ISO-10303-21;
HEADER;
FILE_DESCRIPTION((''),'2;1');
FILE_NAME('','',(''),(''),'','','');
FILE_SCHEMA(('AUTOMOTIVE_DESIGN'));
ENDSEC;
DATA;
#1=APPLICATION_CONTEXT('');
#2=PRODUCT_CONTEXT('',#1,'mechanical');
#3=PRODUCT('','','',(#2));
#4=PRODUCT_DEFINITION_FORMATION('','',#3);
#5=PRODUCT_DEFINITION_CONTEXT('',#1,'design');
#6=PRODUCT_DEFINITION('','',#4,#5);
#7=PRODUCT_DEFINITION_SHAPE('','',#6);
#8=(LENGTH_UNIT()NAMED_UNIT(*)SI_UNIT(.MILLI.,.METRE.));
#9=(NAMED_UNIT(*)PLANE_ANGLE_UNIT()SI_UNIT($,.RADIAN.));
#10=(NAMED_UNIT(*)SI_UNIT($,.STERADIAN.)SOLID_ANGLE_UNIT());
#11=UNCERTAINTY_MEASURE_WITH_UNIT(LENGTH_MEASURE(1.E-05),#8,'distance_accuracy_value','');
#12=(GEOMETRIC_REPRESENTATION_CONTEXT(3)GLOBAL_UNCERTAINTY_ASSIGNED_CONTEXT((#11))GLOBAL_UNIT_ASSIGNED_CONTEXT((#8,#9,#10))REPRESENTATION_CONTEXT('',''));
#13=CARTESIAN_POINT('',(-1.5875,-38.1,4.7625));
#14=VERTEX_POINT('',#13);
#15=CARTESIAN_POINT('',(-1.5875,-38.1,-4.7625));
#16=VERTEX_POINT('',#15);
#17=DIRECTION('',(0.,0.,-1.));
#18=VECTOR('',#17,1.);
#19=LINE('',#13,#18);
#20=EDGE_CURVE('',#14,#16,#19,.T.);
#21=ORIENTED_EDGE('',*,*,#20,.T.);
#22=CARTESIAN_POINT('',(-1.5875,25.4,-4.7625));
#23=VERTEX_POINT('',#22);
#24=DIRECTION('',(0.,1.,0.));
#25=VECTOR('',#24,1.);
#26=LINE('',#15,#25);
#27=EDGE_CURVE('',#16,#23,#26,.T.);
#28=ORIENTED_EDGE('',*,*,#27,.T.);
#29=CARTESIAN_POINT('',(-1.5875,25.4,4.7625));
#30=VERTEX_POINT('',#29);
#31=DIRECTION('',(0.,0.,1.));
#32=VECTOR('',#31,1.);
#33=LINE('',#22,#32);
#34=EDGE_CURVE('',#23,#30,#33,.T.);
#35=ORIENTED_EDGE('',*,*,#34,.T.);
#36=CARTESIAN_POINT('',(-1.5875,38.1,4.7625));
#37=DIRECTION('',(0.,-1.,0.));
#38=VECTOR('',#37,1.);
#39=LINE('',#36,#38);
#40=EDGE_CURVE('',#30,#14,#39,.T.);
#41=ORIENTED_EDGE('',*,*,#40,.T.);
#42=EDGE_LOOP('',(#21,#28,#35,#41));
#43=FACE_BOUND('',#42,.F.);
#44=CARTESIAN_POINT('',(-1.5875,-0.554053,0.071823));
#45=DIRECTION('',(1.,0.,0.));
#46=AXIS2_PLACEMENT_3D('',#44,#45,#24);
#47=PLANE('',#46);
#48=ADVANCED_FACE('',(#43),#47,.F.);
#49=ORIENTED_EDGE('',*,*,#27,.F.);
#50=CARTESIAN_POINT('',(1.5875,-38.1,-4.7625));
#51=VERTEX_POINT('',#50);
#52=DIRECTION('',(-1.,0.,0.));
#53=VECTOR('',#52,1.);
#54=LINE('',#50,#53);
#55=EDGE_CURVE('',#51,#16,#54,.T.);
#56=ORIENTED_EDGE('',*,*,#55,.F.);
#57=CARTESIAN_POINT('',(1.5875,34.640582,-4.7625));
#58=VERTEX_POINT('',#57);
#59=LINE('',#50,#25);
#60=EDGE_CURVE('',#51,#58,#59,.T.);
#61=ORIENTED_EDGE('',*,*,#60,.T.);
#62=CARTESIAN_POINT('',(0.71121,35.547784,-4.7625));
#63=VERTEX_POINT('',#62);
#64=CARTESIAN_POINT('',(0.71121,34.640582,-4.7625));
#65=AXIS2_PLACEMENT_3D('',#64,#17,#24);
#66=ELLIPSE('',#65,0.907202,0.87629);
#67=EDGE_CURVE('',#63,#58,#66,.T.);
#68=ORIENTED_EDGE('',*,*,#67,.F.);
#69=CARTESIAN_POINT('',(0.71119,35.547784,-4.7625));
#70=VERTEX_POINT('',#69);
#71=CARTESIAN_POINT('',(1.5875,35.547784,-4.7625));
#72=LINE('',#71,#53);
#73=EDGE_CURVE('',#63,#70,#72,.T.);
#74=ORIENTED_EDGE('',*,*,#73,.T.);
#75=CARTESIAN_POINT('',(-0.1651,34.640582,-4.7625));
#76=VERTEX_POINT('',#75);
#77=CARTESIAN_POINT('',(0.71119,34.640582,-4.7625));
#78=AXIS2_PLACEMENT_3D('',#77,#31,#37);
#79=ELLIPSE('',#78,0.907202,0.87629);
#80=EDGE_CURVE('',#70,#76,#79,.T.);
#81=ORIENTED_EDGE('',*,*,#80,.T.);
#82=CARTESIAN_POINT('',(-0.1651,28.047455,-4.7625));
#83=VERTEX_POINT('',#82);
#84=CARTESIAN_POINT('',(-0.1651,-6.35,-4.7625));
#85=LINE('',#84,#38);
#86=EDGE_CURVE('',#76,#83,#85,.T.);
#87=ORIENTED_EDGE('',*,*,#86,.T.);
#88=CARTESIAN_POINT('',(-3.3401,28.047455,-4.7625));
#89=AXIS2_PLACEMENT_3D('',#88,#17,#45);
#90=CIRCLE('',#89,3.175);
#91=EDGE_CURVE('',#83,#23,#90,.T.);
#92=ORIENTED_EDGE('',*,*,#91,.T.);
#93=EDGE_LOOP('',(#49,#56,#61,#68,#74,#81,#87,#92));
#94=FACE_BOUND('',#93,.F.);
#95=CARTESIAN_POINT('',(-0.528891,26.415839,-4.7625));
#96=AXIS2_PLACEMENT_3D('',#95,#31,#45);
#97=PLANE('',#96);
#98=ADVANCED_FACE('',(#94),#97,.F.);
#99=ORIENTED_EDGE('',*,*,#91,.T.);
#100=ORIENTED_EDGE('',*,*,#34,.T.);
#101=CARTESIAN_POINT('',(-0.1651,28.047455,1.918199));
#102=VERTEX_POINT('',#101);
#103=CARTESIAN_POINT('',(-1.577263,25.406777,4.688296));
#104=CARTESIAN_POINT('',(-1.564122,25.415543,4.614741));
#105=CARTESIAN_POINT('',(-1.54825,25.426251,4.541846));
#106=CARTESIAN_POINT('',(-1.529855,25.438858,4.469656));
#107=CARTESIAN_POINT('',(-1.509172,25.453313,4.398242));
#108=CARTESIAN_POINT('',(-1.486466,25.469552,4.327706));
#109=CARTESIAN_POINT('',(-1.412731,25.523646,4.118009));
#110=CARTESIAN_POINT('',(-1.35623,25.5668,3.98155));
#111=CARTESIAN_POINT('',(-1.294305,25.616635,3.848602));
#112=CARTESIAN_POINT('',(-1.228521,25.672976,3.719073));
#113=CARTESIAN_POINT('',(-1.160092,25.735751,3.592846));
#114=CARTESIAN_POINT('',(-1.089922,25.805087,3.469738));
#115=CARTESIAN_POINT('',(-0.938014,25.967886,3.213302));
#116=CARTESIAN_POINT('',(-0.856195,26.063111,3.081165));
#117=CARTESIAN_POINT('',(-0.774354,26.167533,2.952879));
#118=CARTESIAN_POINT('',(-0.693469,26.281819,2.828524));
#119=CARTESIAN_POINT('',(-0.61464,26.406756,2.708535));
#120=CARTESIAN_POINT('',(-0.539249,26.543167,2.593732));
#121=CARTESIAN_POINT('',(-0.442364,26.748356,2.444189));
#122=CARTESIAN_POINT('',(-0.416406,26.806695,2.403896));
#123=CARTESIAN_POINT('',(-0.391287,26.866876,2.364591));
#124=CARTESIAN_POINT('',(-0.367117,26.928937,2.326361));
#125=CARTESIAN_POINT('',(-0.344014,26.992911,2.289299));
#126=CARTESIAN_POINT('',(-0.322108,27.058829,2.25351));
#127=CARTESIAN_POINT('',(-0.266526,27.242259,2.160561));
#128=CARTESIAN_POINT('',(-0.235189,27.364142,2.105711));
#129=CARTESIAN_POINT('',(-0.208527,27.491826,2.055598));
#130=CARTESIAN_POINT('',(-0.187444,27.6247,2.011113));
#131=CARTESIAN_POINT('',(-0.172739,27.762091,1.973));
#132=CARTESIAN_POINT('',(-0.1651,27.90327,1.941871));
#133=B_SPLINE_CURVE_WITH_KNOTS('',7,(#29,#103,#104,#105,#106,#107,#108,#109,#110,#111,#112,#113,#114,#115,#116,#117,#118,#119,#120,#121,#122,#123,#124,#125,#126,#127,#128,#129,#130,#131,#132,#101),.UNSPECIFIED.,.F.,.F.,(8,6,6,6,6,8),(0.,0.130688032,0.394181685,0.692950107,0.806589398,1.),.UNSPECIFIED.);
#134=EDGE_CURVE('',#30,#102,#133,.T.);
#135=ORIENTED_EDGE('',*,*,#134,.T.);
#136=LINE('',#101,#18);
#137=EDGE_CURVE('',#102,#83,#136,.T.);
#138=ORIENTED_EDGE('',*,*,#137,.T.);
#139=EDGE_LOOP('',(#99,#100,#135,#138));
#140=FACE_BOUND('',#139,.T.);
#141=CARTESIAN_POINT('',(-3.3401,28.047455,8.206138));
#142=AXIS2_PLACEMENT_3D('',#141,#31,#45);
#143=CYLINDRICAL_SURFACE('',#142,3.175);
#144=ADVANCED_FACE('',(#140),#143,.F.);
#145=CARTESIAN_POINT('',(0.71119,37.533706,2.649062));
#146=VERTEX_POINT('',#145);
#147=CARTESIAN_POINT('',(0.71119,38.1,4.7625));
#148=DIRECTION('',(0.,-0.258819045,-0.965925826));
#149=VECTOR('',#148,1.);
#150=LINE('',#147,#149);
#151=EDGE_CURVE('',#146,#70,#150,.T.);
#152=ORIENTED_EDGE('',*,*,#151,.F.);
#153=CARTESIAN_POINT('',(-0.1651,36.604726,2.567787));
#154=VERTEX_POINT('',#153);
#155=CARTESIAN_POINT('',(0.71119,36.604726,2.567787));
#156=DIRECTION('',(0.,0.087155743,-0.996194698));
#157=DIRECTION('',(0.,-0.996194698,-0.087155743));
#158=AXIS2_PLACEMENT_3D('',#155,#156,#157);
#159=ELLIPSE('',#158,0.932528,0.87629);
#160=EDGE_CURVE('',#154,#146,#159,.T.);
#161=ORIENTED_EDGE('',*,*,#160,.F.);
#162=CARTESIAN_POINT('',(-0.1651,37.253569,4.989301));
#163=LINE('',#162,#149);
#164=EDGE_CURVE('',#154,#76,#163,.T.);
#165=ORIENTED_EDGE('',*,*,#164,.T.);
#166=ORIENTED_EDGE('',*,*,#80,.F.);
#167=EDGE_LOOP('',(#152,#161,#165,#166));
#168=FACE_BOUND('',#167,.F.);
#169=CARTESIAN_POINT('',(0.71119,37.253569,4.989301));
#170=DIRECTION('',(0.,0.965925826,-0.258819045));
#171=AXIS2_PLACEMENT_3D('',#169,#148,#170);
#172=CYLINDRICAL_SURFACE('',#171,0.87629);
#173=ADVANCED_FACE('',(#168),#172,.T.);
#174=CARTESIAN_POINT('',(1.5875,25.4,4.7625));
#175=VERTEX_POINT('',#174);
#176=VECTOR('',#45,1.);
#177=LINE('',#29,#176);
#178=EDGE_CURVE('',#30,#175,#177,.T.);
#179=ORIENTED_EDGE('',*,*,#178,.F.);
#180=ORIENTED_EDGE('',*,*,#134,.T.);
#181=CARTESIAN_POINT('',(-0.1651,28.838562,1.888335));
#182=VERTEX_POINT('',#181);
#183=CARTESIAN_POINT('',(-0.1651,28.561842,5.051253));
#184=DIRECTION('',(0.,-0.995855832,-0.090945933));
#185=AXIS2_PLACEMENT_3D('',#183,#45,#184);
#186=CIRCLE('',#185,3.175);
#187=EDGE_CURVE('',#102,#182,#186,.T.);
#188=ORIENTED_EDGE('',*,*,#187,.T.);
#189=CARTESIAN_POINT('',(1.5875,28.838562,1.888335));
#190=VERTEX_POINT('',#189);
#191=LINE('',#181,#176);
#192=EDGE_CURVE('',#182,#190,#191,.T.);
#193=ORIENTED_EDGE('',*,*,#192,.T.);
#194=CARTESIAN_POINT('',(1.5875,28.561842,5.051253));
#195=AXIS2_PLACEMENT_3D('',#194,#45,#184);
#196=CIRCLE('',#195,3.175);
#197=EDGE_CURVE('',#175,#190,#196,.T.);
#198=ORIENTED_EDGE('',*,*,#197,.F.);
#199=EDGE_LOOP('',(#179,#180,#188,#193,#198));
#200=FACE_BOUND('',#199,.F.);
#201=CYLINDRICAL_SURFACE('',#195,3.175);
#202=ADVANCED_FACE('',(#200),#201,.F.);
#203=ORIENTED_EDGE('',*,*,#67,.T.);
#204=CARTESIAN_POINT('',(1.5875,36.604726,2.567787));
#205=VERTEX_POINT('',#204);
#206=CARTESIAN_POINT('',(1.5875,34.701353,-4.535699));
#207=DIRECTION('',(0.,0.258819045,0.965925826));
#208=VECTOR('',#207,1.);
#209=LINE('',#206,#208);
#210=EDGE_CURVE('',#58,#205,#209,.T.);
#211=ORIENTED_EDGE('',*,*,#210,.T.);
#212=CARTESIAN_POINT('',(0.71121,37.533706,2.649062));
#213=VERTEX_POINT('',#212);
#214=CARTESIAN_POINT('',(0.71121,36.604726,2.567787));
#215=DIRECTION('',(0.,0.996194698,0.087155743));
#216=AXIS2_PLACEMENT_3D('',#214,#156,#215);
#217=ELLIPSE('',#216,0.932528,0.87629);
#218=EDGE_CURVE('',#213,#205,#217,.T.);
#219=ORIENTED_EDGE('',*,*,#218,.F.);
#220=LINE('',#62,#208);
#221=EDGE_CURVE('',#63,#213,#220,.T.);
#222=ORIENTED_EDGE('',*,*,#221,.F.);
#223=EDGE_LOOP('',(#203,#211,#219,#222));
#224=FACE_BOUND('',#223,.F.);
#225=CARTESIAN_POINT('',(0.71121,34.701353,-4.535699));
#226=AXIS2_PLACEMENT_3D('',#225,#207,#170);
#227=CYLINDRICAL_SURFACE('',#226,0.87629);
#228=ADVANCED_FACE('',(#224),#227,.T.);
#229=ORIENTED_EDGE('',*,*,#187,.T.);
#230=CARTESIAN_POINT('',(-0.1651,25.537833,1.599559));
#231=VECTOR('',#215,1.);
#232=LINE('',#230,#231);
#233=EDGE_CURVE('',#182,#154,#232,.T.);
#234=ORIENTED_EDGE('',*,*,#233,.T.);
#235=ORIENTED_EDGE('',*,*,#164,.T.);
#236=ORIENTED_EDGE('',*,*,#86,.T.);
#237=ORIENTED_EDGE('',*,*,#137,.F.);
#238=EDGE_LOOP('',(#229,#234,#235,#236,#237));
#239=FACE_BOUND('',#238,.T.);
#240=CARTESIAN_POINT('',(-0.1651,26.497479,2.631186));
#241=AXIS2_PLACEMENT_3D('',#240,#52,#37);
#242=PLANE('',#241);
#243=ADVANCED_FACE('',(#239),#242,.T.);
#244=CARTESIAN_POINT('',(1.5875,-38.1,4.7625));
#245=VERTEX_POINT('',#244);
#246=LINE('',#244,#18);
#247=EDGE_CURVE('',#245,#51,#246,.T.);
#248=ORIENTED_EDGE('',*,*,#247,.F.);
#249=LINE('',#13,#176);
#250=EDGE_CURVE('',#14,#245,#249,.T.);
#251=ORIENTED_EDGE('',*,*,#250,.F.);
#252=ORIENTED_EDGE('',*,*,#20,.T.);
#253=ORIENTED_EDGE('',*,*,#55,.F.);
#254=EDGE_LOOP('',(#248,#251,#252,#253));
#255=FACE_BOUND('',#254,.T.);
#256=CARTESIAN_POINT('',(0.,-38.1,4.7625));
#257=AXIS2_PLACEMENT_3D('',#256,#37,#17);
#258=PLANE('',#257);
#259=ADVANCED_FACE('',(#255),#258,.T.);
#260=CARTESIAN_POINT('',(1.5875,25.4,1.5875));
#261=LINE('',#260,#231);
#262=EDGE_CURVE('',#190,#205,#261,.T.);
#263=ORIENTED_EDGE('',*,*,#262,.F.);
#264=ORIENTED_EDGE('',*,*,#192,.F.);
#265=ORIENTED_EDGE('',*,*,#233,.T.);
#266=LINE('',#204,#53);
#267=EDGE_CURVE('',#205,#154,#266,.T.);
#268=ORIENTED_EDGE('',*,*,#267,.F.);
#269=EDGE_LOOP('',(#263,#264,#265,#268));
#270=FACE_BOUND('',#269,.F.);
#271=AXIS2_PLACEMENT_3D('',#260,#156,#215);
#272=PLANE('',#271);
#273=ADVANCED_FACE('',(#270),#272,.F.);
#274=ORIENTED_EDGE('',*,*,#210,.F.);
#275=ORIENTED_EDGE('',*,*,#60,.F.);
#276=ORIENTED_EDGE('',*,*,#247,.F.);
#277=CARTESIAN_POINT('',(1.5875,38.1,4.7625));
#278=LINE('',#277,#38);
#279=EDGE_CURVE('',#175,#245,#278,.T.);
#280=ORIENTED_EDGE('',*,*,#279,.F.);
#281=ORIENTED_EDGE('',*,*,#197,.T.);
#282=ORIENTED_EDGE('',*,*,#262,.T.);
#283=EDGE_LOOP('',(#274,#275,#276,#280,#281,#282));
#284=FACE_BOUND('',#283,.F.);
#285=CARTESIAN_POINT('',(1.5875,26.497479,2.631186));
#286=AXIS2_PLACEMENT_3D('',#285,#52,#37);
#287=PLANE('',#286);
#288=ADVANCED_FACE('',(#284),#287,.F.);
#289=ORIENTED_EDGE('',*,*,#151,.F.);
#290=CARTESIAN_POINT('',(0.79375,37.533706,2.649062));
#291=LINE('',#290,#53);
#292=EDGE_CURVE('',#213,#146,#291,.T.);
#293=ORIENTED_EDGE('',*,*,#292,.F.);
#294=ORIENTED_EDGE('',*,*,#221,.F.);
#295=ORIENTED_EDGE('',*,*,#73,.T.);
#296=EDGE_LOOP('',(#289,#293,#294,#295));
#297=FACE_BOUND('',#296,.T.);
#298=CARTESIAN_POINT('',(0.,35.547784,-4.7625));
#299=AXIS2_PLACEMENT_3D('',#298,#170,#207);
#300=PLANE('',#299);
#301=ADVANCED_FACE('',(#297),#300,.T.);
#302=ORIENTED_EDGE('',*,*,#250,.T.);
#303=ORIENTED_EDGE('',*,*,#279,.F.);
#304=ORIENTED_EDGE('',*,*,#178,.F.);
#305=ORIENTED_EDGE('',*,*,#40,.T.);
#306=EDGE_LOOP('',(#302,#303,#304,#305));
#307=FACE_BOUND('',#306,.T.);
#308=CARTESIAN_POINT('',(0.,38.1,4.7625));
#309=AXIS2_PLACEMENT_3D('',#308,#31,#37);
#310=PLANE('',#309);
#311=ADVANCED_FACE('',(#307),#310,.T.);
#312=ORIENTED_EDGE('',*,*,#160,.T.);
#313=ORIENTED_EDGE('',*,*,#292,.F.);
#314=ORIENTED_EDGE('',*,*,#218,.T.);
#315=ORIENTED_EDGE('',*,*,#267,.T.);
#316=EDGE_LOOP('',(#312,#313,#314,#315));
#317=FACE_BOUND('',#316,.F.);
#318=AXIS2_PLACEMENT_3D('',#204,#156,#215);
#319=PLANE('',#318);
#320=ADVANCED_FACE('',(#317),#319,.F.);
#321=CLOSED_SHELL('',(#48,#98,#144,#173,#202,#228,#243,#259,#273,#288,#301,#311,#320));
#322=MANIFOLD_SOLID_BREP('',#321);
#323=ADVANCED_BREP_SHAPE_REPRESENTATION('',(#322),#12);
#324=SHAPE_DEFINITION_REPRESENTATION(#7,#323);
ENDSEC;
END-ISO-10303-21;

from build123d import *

# Parameters (mm, degrees)
F4_DEPTH     = 1.5875
F0_W         = 1.4224
F0_H         = 12.7
F5_DEPTH     = 25.4
F1_R         = 0.87629
F2_DEPTH     = 25.4
F7_T1_DEPTH  = 1.7526
F7_T6_DEPTH  = 12.9686376242
F7_T12_DEPTH = 12.9686376242
F7_T17_DEPTH = 10.3818412391


# Not quite as in the source:
# - a fillet or chamfer that OpenCascade refuses, or shapes differently, is made with other operations: its cross-section is extruded or revolved along the edge and cut away or added
# - a fillet or chamfer is up to 0.001 mm smaller than in the source, because OpenCascade refuses the exact size


with BuildPart() as f4:
    # F3 (on Right) → F4 (new body, symmetric)
    with BuildSketch(Plane.YZ):
        Polygon((35.5477839421, -4.7625), (38.1, 4.7625), (-38.1, 4.7625), (-38.1, -4.7625), align=None)
    extrude(amount=F4_DEPTH, both=True)

    # F0 (on face) → F5 (cut)
    with BuildSketch(Plane.XY.offset(4.7625)):
        with Locations((-0.8763, 31.75)):
            Rectangle(F0_W, F0_H)
    extrude(amount=-F5_DEPTH, mode=Mode.SUBTRACT)

    # F1 (radius 0.8763 in the source; OpenCascade refuses exactly that, so slightly less here)
    f1_edges = [f4.edges().sort_by_distance(p)[0] for p in [
        (1.5875, 36.823892, 0),
        (-0.1651, 36.823892, 0),
    ]]
    fillet(f1_edges, radius=F1_R)

    # F6 (on face) → F2 (cut)
    with BuildSketch(Plane.YZ.offset(1.5875)):
        Polygon((37.1927978359, 4.7625), (25.4, 4.7625), (25.4, 1.5875), (36.6047261297, 2.5677865143), align=None)
        Polygon((43.6932000767, 4.7625), (37.1927978359, 4.7625), (36.6047261297, 2.5677865143), (43.6932000767, 3.1879476263), align=None)
    extrude(amount=-F2_DEPTH, mode=Mode.SUBTRACT)

    # F7: fillet of radius 3.175 on 2 edges, made by hand

    # F7_s2 → F7_t1 (join)
    with BuildSketch(Plane.YZ.offset(-0.1651)):
        with BuildLine():
            ThreePointArc((25.4, 4.7625), (26.5256229175, 2.6151836003), (28.8385617484, 1.8883351718))
            Line((28.8385617484, 1.8883351718), (25.4, 1.5875))
            Line((25.4, 1.5875), (25.4, 4.7625))
        make_face()
    extrude(amount=F7_T1_DEPTH)


with BuildPart() as f7_tool4:
    # F7_s5 → F7_t6 (new body)
    with BuildSketch(Plane.XY.offset(8.2061376242)):
        with BuildLine():
            ThreePointArc((-0.1651, 28.0474550497), (-0.5432151257, 26.5447707848), (-1.5875, 25.4))
            Line((-1.5875, 25.4), (-0.1651, 25.4))
            Line((-0.1651, 25.4), (-0.1651, 28.0474550497))
        make_face()
    extrude(amount=-F7_T6_DEPTH)

    split(bisect_by=Plane(origin=(0, 0.0551082957, -0.6298907024), x_dir=(1, 0, 0), z_dir=(0, 0.0871557427, -0.9961946981)), keep=Keep.TOP)


with BuildPart() as f4_1:
    add(f4.part)

    # F7_t3: union F7_tool4
    add(f7_tool4.part)


with BuildPart() as f7_tool10:
    # F7_s11 → F7_t12 (new body)
    with BuildSketch(Plane.XY.offset(8.2061376242)):
        with BuildLine():
            ThreePointArc((-0.1651, 28.0474550497), (-0.5432151257, 26.5447707848), (-1.5875, 25.4))
            Line((-1.5875, 25.4), (-0.1651, 25.4))
            Line((-0.1651, 25.4), (-0.1651, 28.0474550497))
        make_face()
    extrude(amount=-F7_T12_DEPTH)

    split(bisect_by=Plane.XY.offset(4.7625), keep=Keep.BOTTOM)

    split(bisect_by=Plane(origin=(0, 0.0551082957, -0.6298907024), x_dir=(1, 0, 0), z_dir=(0, -0.0871557427, 0.9961946981)), keep=Keep.TOP)


with BuildPart() as f7_tool15:
    # F7_s16 → F7_t17 (new body)
    with BuildSketch(Plane.YZ.offset(1.5875)):
        with BuildLine():
            ThreePointArc((25.4, 4.7625), (26.5256229175, 2.6151836003), (28.8385617484, 1.8883351718))
            Line((28.8385617484, 1.8883351718), (25.4, 1.5875))
            Line((25.4, 1.5875), (25.4, 4.7625))
        make_face()
    extrude(amount=-F7_T17_DEPTH)

    split(bisect_by=Plane.YZ.offset(-0.1651), keep=Keep.BOTTOM)

    split(bisect_by=Plane.YZ.offset(-1.5875), keep=Keep.TOP)


with BuildPart() as f7_tool10_1:
    add(f7_tool10.part)

    # F7_t20: intersect F7_tool15
    add(f7_tool15.part, mode=Mode.INTERSECT)


with BuildPart() as f4_2:
    add(f4_1.part)

    # F7_t8: union F7_tool10
    add(f7_tool10_1.part)


solid = f4_2.part
